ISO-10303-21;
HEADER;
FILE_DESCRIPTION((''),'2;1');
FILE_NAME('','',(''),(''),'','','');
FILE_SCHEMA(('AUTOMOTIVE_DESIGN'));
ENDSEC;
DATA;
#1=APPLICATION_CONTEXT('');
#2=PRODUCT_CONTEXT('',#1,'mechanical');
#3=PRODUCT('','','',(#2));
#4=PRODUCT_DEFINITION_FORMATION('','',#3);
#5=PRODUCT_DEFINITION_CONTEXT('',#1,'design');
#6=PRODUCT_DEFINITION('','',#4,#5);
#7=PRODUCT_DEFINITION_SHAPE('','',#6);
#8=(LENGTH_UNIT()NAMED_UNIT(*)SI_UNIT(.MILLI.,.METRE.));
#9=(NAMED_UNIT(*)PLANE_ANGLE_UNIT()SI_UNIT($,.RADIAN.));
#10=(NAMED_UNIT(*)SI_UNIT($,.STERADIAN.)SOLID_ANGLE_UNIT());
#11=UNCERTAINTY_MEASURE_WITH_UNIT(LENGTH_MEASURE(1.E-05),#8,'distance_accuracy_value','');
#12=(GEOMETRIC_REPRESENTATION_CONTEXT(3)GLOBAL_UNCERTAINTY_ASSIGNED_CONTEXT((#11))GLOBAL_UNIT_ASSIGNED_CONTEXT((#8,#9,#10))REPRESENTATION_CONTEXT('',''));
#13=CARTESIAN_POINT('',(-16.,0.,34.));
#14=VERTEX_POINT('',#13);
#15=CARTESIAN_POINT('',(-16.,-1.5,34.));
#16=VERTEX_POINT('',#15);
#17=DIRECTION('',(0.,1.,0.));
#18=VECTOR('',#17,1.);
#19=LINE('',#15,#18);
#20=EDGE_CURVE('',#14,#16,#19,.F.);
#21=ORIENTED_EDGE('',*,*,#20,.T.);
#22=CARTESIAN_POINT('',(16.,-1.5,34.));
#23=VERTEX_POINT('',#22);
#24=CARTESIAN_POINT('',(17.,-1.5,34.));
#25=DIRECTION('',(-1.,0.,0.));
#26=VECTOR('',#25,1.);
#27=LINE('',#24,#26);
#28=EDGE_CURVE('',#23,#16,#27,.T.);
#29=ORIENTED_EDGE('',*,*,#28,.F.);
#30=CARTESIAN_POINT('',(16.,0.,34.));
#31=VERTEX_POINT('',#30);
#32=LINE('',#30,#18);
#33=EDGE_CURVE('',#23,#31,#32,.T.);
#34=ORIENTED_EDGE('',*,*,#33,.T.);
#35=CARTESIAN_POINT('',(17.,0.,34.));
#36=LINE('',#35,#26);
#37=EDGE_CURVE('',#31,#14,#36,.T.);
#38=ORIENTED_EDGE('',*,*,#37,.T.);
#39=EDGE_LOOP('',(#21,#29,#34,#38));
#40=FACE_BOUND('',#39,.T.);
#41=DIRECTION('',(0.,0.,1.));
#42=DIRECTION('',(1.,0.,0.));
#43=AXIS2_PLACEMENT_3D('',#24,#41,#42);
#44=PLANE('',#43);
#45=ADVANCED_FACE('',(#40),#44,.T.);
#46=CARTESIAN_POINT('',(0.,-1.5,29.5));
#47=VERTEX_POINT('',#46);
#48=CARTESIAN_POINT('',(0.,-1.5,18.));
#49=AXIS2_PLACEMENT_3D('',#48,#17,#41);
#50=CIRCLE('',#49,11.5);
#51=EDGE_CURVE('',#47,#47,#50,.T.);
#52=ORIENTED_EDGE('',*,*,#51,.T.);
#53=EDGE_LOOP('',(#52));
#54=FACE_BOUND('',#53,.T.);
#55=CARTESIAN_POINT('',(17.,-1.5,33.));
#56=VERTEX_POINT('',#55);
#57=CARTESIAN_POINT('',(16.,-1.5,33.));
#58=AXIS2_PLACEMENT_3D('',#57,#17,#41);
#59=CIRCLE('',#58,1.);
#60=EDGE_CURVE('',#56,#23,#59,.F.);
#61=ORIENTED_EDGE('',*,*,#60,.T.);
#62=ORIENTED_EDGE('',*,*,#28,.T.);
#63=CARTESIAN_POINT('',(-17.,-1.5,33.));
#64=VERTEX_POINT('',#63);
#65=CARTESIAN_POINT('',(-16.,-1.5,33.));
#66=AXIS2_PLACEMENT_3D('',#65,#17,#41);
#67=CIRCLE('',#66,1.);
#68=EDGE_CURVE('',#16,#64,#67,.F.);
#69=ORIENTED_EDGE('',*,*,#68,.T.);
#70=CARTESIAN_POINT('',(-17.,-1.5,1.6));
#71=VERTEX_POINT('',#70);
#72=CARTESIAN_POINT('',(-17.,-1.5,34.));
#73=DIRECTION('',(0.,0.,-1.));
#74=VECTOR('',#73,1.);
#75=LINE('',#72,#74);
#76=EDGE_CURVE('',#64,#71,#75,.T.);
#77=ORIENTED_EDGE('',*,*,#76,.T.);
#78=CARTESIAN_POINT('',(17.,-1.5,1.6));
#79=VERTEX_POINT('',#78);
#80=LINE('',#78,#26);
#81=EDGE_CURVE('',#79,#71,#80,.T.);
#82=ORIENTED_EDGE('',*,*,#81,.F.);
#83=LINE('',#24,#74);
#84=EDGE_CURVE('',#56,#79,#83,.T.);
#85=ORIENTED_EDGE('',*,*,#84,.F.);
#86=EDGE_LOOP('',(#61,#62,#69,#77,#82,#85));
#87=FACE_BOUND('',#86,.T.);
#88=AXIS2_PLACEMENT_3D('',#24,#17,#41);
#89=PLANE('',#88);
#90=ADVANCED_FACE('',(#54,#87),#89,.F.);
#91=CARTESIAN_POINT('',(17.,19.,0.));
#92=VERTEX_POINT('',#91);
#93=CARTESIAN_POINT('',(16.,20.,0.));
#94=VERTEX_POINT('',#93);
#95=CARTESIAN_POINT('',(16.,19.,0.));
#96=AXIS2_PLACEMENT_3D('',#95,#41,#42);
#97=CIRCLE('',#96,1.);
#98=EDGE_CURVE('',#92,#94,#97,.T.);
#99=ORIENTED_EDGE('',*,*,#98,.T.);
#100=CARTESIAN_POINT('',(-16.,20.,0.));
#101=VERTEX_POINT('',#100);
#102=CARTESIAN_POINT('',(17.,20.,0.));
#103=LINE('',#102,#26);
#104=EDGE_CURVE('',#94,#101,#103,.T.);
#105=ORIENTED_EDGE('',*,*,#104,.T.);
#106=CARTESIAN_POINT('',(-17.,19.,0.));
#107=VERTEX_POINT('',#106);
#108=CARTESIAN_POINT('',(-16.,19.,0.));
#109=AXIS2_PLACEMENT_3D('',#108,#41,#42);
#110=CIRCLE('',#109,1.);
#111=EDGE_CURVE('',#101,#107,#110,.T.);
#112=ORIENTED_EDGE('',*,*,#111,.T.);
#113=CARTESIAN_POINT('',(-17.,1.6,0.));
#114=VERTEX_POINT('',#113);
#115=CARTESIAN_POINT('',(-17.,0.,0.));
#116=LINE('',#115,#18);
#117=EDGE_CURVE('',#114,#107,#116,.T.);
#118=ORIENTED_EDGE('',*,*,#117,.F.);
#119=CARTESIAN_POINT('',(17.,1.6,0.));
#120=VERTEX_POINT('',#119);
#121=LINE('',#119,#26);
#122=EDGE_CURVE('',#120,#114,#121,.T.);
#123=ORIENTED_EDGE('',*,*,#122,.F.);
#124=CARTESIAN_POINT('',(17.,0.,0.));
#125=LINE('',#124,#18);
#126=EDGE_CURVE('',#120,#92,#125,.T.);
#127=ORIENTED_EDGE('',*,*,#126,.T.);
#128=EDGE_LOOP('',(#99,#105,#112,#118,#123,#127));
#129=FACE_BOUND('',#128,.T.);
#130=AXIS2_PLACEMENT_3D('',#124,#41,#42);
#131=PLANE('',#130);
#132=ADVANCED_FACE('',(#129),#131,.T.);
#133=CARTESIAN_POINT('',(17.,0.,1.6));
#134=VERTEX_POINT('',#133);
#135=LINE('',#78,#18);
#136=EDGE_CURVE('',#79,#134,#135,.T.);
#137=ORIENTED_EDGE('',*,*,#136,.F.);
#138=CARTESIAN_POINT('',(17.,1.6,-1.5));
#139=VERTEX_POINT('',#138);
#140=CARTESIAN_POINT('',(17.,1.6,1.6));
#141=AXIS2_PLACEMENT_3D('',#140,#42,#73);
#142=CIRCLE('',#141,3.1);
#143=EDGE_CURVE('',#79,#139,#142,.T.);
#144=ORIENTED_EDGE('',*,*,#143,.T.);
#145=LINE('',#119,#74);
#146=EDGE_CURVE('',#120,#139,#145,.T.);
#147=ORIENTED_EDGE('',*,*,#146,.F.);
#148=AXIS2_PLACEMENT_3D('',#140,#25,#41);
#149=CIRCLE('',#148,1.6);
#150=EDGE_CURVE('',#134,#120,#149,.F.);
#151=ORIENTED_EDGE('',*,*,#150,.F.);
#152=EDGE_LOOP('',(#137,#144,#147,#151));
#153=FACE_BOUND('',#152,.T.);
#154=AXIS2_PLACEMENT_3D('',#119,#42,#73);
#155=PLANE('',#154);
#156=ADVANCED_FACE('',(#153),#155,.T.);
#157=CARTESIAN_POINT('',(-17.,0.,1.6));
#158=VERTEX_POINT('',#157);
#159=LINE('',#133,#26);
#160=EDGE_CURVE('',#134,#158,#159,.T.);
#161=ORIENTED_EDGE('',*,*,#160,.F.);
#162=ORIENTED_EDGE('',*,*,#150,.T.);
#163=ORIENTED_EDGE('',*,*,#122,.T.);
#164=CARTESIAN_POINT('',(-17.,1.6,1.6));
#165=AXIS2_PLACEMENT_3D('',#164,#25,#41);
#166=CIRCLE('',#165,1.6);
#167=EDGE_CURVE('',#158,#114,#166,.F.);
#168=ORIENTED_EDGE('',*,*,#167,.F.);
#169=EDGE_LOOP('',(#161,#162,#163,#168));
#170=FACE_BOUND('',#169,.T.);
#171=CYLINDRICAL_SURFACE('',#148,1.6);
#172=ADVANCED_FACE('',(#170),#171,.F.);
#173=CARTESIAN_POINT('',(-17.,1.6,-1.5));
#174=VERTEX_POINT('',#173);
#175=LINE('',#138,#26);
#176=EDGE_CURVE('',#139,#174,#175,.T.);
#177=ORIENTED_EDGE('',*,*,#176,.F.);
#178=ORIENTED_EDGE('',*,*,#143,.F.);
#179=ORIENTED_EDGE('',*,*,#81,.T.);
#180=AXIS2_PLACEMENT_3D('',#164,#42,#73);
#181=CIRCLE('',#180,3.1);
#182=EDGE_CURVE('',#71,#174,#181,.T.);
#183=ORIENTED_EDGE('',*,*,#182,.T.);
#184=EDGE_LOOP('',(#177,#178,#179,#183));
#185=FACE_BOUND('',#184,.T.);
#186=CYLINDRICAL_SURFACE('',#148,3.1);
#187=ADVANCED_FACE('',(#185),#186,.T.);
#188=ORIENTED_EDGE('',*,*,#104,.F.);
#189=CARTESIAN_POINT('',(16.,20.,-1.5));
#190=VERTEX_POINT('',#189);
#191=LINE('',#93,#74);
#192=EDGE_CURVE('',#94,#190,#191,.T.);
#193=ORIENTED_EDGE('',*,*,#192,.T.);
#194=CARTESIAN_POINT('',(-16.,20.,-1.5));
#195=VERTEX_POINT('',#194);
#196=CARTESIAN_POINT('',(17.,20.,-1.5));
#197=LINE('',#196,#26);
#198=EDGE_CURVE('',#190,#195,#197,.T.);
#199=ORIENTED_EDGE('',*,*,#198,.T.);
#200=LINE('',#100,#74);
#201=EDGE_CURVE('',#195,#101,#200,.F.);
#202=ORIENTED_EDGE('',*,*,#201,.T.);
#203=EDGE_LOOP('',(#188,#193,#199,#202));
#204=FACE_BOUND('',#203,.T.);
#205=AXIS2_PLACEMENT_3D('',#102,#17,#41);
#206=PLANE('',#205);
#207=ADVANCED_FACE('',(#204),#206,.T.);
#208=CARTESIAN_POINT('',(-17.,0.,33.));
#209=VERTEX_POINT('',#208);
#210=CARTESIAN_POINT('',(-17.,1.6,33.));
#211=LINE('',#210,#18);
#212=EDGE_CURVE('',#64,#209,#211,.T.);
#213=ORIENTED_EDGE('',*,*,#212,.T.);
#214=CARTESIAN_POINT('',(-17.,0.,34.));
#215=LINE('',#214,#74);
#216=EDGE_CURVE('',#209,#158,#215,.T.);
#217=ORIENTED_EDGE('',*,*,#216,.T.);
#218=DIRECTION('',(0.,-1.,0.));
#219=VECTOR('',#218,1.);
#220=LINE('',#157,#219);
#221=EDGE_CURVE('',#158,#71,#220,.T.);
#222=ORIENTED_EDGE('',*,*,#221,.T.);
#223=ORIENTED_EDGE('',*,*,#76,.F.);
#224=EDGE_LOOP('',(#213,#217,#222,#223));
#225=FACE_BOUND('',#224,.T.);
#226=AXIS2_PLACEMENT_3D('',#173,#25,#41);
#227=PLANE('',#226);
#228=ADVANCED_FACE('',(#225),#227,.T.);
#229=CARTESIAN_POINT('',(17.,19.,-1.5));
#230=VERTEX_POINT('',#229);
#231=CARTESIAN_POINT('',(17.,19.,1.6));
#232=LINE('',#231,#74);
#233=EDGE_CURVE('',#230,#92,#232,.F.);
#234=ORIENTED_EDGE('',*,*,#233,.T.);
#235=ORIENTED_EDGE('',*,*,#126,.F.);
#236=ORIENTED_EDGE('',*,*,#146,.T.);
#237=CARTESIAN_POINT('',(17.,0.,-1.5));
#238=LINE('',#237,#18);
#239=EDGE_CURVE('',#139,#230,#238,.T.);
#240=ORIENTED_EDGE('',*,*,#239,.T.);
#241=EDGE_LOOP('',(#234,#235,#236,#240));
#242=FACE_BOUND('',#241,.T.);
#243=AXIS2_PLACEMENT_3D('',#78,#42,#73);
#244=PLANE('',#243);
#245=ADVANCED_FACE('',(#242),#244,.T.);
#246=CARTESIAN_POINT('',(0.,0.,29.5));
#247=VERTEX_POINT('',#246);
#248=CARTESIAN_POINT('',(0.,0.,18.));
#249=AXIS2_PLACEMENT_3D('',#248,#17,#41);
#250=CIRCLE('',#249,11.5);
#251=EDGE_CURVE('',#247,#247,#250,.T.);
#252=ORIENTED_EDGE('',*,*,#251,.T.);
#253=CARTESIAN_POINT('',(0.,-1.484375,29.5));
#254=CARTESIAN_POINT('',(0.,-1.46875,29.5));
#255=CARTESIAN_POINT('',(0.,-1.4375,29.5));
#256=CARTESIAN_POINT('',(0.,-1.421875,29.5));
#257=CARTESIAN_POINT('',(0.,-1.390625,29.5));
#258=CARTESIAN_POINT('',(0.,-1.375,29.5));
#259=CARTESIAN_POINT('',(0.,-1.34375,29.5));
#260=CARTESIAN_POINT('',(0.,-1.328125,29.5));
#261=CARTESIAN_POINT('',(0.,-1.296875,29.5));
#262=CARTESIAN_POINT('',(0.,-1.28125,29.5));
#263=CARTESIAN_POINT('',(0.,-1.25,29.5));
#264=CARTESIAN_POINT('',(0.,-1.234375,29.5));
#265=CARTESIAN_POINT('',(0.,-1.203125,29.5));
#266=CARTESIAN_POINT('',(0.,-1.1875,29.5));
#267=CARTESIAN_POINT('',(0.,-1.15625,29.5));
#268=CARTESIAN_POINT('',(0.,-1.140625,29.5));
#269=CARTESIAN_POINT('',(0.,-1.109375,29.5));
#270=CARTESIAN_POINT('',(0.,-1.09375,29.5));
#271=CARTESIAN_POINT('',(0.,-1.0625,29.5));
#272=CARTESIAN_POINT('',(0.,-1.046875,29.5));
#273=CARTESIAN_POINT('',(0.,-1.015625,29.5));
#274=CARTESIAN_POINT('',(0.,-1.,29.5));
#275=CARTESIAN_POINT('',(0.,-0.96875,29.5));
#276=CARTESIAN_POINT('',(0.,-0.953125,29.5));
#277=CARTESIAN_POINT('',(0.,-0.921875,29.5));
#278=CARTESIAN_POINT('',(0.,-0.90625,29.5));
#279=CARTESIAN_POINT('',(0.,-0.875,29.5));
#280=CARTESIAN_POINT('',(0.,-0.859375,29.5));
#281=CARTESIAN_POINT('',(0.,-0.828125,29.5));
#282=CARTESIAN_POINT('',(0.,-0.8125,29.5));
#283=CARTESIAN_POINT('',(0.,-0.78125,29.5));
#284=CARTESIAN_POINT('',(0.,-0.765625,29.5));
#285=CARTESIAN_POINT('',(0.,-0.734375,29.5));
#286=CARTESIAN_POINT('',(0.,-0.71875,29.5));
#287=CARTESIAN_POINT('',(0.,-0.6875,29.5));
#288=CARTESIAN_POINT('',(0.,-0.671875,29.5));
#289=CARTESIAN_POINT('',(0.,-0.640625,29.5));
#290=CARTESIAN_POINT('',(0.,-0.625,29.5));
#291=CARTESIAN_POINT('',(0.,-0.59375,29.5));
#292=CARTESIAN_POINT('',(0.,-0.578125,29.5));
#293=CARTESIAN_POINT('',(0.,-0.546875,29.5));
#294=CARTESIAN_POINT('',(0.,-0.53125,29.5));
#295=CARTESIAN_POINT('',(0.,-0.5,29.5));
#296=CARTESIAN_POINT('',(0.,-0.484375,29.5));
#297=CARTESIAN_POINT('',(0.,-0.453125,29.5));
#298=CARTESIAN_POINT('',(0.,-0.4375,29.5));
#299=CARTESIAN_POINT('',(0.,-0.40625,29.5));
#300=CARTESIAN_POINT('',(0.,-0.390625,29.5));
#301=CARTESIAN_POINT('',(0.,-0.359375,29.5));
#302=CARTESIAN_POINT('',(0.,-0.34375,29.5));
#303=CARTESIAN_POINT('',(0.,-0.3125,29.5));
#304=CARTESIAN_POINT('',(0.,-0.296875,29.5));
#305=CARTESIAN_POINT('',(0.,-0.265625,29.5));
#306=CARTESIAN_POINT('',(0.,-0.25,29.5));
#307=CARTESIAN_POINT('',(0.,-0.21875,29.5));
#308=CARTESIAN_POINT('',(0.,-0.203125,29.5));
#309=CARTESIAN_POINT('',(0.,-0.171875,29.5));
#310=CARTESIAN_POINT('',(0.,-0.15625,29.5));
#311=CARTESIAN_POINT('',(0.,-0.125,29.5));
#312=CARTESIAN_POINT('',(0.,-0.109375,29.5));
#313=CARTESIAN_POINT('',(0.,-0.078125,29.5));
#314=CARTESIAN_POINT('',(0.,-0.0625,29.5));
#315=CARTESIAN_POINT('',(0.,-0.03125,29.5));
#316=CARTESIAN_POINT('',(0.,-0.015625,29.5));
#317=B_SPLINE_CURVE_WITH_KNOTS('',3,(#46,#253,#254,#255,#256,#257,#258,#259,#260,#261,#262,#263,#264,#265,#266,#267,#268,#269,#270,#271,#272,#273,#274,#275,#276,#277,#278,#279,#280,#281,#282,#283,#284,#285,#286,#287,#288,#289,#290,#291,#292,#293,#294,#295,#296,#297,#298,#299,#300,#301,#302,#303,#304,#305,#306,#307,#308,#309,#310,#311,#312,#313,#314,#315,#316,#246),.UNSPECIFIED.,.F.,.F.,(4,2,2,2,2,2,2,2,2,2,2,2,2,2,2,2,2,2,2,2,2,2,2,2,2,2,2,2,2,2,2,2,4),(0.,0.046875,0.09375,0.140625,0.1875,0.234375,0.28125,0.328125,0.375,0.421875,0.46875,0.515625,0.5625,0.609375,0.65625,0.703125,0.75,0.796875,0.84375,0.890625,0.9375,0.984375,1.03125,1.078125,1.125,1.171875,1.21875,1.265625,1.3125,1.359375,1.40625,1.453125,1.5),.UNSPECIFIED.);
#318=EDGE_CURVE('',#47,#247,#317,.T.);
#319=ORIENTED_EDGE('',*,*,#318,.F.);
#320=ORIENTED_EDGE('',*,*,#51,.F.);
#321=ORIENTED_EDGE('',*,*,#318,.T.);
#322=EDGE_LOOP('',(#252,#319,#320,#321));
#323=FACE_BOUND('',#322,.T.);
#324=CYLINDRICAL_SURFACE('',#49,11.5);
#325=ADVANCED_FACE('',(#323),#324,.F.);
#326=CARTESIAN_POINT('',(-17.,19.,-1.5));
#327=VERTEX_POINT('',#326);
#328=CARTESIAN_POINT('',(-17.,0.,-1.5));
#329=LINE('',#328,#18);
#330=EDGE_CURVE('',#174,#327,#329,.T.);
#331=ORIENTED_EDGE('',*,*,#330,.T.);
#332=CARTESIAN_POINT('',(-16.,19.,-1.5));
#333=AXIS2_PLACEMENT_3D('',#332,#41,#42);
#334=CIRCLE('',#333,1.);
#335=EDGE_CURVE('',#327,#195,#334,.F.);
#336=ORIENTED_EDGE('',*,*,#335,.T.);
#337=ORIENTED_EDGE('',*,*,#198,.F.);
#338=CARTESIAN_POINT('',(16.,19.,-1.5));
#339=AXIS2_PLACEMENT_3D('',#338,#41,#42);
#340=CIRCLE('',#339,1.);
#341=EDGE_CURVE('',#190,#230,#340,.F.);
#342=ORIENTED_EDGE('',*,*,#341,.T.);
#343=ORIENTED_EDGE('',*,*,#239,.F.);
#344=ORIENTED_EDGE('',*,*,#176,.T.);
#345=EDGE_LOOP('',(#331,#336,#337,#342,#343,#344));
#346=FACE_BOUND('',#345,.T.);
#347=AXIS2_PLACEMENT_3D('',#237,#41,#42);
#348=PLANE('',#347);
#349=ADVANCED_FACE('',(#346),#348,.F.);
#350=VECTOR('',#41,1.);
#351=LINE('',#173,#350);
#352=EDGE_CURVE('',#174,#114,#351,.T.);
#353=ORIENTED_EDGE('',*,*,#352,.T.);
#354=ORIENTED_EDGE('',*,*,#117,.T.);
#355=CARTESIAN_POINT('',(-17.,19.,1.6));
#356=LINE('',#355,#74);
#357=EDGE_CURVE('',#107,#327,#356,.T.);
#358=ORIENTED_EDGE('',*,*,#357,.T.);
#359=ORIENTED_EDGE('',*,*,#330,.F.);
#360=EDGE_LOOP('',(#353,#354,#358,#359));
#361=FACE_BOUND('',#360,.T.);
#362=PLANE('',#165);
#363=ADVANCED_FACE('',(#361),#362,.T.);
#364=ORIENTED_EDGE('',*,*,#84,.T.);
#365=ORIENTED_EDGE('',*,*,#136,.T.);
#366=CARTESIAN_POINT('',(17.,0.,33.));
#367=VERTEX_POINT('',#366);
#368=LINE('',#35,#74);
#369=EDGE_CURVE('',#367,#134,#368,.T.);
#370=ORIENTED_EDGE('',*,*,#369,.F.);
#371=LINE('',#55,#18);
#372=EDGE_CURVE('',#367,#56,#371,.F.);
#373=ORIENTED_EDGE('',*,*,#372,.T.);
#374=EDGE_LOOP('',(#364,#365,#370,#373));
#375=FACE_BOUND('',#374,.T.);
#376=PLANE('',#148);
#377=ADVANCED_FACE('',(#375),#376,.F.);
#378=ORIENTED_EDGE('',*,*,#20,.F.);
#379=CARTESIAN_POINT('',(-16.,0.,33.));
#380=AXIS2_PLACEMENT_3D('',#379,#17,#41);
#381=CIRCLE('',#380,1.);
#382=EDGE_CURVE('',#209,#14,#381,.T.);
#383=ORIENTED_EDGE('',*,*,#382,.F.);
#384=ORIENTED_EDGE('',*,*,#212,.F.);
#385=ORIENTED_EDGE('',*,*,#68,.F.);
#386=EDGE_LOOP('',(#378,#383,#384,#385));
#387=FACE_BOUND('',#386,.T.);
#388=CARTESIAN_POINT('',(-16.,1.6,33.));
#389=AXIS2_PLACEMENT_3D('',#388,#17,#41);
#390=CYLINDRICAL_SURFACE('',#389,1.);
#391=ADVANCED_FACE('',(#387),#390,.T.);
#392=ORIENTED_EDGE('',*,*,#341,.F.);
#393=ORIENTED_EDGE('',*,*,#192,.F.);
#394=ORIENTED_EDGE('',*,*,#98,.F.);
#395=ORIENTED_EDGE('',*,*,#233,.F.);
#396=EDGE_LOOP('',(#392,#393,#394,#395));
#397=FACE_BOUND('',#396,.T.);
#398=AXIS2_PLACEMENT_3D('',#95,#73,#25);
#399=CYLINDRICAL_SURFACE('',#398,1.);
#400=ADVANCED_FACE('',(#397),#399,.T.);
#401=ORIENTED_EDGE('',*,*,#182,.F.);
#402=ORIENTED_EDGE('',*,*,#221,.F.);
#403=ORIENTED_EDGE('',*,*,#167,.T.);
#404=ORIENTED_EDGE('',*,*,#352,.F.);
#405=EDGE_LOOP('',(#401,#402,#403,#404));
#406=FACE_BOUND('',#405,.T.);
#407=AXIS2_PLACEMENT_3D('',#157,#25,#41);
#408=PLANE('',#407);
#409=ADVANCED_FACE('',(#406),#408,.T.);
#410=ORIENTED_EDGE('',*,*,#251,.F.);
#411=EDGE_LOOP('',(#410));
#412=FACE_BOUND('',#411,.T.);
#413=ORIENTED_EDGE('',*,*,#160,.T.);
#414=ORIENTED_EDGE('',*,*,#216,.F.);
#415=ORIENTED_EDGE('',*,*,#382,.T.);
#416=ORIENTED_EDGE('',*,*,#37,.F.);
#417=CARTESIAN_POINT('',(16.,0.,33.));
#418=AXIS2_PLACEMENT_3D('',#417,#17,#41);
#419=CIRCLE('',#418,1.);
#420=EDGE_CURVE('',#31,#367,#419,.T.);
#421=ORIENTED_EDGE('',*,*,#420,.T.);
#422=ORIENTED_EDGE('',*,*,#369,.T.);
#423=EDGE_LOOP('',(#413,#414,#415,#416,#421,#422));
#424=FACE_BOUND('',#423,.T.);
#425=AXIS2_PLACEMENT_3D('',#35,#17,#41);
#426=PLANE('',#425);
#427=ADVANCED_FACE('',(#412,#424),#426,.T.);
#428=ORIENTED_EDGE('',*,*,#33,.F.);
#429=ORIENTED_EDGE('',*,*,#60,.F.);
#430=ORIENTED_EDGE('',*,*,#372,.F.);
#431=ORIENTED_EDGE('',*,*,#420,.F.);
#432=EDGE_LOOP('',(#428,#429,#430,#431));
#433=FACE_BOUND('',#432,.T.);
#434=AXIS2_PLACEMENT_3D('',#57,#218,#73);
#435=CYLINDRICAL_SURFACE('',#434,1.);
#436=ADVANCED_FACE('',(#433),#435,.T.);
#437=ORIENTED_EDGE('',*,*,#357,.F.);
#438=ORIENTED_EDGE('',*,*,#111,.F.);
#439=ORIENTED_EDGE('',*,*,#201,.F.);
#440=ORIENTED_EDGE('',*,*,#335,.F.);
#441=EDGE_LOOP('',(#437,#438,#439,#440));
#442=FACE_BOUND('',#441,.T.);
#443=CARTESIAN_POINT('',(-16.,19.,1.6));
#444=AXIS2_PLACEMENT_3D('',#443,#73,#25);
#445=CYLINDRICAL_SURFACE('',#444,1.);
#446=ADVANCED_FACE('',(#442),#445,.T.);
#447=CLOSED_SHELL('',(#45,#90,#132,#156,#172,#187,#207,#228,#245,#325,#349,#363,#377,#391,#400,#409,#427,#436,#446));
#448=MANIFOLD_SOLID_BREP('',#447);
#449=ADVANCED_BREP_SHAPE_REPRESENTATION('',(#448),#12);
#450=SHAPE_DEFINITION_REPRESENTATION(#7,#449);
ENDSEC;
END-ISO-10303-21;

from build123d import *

# Parameters (mm, degrees)
SM_BASE_FLANGE_1_DEPTH = 17
SKETCH_6_R             = 11.5
CUT_EXTRUDE_1_DEPTH    = 43.95346319
FILLET_1_R             = 1


# Sheet-metal steps are written as plain solids
with BuildPart() as part:
    # Sketch 1 → Базовая кромка1 (new, symmetric)
    with BuildSketch(Plane(origin=(0, 0, 0), x_dir=(0, 0, -1), z_dir=(1, 0, 0))):
        with BuildLine():
            Line((-34, 0), (-1.6, 0))
            ThreePointArc((-1.6, 0), (-0.46862915, 0.46862915), (0, 1.6))
            Line((0, 1.6), (0, 20))
            Line((0, 20), (1.5, 20))
            Line((1.5, 20), (1.5, 1.6))
            ThreePointArc((1.5, 1.6), (0.592031022, -0.592031022), (-1.6, -1.5))
            Line((-1.6, -1.5), (-34, -1.5))
            Line((-34, -1.5), (-34, 0))
        make_face()
    extrude(amount=SM_BASE_FLANGE_1_DEPTH, both=True)

    # Эскиз6 → Вырез-Вытянуть1 (cut, through all)
    with BuildSketch(Plane(origin=(0, 0, 0), x_dir=(1, 0, 0), z_dir=(0, 1, 0))):
        with Locations(Location((0, -18, 0), (0, 0, 270))):
            Circle(SKETCH_6_R)
    extrude(amount=-CUT_EXTRUDE_1_DEPTH, mode=Mode.SUBTRACT)

    # Скругление1
    fillet_1_edges = [part.edges().sort_by_distance(p)[0] for p in [
        (17, -0.75, 34),
        (17, 20, -0.75),
        (-17, -0.75, 34),
        (-17, 20, -0.75),
    ]]
    fillet(fillet_1_edges, radius=FILLET_1_R)


solid = part.part
